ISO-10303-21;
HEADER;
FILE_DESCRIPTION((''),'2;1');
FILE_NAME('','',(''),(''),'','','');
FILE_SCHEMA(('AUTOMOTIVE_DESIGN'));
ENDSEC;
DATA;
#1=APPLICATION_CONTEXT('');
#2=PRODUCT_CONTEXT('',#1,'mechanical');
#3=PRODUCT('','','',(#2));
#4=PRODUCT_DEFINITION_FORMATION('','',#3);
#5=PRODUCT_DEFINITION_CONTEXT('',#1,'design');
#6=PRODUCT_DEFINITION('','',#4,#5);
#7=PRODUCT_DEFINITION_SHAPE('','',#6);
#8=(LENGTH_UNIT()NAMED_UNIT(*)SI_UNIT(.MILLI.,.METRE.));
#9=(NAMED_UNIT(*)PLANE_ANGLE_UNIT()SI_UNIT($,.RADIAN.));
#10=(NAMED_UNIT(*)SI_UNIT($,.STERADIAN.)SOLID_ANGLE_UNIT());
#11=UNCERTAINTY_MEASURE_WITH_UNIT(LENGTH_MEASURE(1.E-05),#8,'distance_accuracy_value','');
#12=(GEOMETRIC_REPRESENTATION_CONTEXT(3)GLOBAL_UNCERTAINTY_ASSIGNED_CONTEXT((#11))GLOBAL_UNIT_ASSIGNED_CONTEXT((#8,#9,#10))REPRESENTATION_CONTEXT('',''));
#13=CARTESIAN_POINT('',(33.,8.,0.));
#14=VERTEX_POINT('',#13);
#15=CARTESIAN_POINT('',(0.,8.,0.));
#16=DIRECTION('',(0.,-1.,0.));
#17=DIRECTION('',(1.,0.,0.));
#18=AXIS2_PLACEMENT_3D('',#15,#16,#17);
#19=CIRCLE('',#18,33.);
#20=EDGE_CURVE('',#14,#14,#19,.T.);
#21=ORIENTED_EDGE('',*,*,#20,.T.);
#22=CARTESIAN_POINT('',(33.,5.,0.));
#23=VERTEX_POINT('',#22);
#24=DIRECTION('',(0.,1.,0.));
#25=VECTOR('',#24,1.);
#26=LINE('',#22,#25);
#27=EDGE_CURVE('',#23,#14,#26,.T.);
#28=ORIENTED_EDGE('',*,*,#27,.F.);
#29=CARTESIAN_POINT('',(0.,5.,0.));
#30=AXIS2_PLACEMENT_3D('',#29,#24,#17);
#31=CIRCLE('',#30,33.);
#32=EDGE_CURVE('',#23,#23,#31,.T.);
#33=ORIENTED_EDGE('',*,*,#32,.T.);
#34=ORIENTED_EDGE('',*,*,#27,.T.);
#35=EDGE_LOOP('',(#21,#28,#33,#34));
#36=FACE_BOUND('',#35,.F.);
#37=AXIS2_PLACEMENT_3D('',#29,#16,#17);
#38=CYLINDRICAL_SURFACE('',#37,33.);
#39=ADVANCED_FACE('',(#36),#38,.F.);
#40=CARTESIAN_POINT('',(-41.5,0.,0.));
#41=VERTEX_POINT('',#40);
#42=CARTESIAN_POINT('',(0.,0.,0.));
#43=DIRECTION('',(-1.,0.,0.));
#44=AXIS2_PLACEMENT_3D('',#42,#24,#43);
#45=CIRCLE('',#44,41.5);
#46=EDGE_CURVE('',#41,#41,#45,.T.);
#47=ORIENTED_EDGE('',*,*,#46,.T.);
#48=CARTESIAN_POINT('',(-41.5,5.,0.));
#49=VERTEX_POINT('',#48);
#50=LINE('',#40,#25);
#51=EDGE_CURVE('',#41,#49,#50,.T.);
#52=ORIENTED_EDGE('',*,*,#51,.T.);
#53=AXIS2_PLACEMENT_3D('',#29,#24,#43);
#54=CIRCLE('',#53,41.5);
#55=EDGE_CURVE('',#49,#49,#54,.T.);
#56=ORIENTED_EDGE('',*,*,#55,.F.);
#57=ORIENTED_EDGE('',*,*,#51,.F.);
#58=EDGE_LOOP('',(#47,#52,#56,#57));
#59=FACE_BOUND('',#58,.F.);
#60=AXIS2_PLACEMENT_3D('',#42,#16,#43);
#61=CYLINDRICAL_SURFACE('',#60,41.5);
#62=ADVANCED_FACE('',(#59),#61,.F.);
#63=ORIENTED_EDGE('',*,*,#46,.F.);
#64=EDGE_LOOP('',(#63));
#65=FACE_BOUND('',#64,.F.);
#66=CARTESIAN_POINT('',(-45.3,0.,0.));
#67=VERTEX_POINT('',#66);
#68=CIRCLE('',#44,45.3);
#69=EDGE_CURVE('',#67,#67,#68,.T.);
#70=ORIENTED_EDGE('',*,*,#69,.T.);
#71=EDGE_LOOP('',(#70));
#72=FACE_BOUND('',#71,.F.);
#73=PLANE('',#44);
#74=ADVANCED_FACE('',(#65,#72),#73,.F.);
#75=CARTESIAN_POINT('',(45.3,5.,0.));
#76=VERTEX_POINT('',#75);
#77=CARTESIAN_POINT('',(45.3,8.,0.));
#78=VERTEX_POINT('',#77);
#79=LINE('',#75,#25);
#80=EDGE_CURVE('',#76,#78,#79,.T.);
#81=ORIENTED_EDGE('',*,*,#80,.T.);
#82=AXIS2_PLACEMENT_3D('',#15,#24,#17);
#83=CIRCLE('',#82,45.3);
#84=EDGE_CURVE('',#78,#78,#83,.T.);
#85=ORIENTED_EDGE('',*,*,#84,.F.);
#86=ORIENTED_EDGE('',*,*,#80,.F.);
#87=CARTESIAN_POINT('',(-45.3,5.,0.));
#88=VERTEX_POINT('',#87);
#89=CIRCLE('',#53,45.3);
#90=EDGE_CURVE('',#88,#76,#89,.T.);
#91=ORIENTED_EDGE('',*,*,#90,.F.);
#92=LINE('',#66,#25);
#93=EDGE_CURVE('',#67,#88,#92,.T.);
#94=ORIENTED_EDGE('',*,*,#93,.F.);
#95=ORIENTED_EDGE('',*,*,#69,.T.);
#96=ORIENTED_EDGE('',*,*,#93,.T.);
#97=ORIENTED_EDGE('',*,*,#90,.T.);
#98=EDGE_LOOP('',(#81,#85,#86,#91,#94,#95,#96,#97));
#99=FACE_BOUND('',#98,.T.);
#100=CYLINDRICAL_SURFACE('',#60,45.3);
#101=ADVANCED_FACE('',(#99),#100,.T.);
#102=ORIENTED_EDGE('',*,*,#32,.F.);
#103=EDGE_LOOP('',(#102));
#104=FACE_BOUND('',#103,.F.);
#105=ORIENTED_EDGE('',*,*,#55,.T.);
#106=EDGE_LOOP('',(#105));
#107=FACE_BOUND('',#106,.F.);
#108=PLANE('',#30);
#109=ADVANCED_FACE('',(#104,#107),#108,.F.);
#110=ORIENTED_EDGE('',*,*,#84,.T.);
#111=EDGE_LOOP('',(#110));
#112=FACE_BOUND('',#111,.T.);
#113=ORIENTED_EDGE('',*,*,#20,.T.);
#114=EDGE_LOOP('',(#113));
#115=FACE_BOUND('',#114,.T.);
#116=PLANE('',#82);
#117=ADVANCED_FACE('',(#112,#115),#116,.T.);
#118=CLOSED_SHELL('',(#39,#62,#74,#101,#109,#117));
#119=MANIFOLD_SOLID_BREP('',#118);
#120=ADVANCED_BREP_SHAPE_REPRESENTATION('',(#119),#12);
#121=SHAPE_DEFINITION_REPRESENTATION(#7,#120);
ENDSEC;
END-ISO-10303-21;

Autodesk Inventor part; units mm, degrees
ref_plane "YZ Plane" through (0, 0, 0) normal (1, 0, 0) x (0, 1, 0)
ref_plane "XZ Plane" through (0, 0, 0) normal (0, 1, 0) x (-1, 0, 0)
ref_plane "XY Plane" through (0, 0, 0) normal (0, 0, 1) x (1, 0, 0)
sketch "Sketch1" plane through (0, 0, 0) normal (0, 1, 0) x (-1, 0, 0)
  circle A0 centre (0, 0) radius 41.5
  line L0 (0, -41.5) -> (0, -45.3)
  circle A1 centre (0, 0) radius 45.3
  dimension "d1" = 83
  dimension "d2" = 3.8
extrude "Extrusion1" add sketch "Sketch1" along normal blind 5
sketch "Sketch2" plane through (0, 5, 0) normal (0, 1, 0) x (1, 0, 0)
  circle A0 centre (0, 0) radius 45.3
  circle A1 centre (0, 0) radius 41.5 projected
  line L0 (0, -41.5) -> (0, -33)
  circle A2 centre (0, 0) radius 33
  dimension "d5" = 8.5
extrude "Extrusion2" add sketch "Sketch2" along normal blind 3 contours A0 | A1
properties part number "upevnovac_veze"
